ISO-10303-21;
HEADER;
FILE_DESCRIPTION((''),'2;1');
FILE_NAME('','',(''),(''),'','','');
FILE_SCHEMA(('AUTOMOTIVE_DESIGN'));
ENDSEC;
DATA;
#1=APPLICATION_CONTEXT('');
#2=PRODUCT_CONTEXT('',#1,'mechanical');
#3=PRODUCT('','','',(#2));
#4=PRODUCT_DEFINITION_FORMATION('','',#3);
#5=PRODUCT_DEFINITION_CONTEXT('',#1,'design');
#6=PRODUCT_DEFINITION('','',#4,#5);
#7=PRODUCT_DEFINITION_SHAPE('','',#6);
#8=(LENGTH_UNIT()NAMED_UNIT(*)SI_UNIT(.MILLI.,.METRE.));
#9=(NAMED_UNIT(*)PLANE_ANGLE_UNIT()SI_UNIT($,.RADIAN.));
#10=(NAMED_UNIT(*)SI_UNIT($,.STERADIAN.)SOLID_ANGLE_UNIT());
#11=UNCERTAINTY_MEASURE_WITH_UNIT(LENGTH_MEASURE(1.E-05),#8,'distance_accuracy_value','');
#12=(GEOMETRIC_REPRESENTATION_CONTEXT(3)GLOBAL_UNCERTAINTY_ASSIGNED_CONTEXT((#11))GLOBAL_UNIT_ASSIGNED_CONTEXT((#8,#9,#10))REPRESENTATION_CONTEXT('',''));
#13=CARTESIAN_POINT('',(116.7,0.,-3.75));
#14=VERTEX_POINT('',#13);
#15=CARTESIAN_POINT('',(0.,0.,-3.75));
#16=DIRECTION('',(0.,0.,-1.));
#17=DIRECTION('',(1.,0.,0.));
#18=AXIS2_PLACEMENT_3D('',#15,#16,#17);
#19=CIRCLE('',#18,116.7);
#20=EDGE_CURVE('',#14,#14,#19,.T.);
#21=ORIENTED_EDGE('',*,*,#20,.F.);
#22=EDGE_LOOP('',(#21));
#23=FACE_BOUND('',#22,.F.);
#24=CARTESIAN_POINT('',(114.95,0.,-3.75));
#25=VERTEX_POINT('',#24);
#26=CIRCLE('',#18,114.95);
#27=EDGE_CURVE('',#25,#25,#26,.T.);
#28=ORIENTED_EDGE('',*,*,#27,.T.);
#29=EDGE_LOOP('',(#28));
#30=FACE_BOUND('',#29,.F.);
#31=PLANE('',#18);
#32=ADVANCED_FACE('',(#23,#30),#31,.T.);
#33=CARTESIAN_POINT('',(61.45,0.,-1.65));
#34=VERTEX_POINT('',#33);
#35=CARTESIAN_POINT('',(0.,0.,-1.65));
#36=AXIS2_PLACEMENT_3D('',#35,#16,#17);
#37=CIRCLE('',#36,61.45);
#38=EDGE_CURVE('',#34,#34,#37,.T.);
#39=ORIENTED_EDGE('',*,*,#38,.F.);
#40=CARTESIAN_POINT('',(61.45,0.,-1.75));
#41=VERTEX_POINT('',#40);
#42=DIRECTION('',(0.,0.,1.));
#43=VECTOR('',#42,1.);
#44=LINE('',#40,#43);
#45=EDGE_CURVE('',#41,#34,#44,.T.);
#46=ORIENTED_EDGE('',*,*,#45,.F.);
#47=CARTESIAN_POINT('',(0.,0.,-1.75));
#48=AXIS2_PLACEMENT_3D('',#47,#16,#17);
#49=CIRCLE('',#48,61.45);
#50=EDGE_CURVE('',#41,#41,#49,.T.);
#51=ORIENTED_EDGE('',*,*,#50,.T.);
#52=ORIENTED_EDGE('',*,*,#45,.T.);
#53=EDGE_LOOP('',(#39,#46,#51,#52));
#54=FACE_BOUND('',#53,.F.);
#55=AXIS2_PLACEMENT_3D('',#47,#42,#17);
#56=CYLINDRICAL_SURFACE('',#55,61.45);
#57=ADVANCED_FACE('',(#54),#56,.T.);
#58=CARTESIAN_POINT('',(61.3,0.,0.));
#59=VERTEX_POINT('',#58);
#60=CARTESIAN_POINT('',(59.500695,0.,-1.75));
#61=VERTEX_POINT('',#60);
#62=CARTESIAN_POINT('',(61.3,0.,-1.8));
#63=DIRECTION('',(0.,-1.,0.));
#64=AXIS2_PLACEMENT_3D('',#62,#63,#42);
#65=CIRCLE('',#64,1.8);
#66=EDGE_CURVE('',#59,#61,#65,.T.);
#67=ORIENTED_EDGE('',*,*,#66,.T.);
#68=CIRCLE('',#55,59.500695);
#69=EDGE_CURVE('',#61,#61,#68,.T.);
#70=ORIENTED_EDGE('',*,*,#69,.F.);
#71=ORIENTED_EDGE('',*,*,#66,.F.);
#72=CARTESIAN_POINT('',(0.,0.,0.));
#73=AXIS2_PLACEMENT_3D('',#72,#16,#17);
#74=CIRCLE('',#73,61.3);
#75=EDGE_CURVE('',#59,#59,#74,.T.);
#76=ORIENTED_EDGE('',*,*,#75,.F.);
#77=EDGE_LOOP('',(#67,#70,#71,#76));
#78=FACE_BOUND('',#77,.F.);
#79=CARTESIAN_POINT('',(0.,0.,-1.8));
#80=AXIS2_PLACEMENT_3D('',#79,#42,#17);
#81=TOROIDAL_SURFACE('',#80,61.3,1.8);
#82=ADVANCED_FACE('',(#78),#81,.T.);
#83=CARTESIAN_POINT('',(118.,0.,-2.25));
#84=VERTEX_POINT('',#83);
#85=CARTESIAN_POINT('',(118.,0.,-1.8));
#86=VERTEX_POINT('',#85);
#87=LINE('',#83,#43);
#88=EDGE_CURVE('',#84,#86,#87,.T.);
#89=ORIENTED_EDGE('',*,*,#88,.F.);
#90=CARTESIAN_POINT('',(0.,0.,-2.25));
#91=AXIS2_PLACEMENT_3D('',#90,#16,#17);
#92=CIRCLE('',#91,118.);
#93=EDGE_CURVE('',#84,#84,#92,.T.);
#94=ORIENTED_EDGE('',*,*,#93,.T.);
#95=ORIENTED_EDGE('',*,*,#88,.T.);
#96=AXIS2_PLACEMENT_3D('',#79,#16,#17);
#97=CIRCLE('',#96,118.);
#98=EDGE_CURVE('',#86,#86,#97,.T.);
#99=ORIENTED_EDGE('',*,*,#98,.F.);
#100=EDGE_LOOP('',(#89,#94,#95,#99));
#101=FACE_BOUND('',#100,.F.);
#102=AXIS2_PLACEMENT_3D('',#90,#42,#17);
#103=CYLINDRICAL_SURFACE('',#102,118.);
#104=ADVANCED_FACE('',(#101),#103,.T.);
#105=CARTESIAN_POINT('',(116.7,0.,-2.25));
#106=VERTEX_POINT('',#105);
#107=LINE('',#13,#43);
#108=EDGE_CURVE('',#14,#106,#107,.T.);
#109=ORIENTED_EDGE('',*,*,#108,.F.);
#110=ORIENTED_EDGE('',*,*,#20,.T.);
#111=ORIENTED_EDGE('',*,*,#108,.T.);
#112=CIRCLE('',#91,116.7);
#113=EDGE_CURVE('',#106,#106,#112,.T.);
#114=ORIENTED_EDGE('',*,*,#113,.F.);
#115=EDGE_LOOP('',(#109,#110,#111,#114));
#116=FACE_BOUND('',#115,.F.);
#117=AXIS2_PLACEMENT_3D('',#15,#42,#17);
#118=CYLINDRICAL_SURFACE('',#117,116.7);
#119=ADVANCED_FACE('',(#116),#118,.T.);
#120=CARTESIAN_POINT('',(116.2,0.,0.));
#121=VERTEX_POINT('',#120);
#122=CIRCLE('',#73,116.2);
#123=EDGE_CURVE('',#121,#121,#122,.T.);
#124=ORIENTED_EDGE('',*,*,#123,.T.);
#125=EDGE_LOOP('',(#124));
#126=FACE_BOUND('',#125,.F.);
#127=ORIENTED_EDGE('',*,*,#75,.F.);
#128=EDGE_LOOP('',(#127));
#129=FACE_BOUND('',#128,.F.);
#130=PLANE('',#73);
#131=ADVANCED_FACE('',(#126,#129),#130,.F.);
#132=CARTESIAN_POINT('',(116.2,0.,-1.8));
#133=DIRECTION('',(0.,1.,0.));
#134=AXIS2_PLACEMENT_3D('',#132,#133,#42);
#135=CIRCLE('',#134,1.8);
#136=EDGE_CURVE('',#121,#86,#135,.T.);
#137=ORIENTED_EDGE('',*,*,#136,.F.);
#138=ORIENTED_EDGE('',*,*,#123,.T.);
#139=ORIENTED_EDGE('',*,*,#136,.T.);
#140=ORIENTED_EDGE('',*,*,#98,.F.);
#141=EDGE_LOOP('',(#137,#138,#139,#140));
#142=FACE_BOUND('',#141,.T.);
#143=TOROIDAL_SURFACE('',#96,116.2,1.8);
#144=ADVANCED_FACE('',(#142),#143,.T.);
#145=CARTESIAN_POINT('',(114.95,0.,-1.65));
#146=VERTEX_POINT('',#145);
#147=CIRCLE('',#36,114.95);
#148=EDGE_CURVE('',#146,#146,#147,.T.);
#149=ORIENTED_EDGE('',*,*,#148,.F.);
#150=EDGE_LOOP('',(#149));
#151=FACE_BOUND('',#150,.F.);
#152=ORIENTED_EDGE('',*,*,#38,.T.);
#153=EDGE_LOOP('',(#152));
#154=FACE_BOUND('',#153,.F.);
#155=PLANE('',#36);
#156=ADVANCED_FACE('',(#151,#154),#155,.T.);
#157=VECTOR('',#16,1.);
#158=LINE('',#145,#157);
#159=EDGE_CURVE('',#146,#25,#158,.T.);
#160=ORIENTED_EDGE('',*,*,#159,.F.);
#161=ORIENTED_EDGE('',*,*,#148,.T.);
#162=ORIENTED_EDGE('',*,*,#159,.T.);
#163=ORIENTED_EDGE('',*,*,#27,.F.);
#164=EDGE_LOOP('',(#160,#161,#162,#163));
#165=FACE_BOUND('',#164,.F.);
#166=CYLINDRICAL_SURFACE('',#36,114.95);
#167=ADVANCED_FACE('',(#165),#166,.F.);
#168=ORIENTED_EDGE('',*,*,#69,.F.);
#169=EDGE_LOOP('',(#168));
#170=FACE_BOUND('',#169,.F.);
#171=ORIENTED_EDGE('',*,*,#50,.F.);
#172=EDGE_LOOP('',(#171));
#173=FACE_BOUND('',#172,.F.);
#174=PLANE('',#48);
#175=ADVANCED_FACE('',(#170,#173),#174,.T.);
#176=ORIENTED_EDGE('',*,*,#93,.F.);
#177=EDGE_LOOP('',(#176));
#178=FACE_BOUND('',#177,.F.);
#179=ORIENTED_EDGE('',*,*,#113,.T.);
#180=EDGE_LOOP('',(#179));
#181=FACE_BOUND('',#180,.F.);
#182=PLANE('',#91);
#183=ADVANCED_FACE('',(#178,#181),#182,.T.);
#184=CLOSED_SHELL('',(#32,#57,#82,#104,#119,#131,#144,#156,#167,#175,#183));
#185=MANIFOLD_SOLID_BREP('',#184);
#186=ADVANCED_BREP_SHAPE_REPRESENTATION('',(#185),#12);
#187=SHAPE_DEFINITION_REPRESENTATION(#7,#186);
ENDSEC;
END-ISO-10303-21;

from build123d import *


# Not quite as in the source:
# - a fillet or chamfer that OpenCascade refuses, or shapes differently, is made with other operations: its cross-section is extruded or revolved along the edge and cut away or added


with BuildPart() as f1:
    # F0 (on Front) → F1 (revolve)
    with BuildSketch(Plane.XZ):
        Polygon((118, 0), (59.5, 0), (59.5, -1.75), (61.45, -1.75), (61.45, -1.65), (114.95, -1.65), (114.95, -3.75), (116.7, -3.75), (116.7, -2.25), (118, -2.25), align=None)
    revolve(axis=Axis((0, 0, -2.4080555886), (0, 0, -1)))

    # F2: fillet of radius 1.8 on 2 edges, made by hand

    # F2_s1 → F2_t2 (revolve, cut)
    with BuildSketch(Plane.XZ):
        with BuildLine():
            ThreePointArc((61.3, 0), (60.0272077939, -0.5272077939), (59.5, -1.8))
            Line((59.5, -1.8), (59.5, 0))
            Line((59.5, 0), (61.3, 0))
        make_face()
    revolve(axis=Axis((0, 0, 0), (0, 0, -1)), mode=Mode.SUBTRACT)

    # F2_s3 → F2_t4 (revolve, cut)
    with BuildSketch(Plane.XZ):
        with BuildLine():
            ThreePointArc((116.2, 0), (117.4727922061, -0.5272077939), (118, -1.8))
            Line((118, -1.8), (118, 0))
            Line((118, 0), (116.2, 0))
        make_face()
    revolve(axis=Axis((0, 0, 0), (0, 0, -1)), mode=Mode.SUBTRACT)


solid = f1.part
